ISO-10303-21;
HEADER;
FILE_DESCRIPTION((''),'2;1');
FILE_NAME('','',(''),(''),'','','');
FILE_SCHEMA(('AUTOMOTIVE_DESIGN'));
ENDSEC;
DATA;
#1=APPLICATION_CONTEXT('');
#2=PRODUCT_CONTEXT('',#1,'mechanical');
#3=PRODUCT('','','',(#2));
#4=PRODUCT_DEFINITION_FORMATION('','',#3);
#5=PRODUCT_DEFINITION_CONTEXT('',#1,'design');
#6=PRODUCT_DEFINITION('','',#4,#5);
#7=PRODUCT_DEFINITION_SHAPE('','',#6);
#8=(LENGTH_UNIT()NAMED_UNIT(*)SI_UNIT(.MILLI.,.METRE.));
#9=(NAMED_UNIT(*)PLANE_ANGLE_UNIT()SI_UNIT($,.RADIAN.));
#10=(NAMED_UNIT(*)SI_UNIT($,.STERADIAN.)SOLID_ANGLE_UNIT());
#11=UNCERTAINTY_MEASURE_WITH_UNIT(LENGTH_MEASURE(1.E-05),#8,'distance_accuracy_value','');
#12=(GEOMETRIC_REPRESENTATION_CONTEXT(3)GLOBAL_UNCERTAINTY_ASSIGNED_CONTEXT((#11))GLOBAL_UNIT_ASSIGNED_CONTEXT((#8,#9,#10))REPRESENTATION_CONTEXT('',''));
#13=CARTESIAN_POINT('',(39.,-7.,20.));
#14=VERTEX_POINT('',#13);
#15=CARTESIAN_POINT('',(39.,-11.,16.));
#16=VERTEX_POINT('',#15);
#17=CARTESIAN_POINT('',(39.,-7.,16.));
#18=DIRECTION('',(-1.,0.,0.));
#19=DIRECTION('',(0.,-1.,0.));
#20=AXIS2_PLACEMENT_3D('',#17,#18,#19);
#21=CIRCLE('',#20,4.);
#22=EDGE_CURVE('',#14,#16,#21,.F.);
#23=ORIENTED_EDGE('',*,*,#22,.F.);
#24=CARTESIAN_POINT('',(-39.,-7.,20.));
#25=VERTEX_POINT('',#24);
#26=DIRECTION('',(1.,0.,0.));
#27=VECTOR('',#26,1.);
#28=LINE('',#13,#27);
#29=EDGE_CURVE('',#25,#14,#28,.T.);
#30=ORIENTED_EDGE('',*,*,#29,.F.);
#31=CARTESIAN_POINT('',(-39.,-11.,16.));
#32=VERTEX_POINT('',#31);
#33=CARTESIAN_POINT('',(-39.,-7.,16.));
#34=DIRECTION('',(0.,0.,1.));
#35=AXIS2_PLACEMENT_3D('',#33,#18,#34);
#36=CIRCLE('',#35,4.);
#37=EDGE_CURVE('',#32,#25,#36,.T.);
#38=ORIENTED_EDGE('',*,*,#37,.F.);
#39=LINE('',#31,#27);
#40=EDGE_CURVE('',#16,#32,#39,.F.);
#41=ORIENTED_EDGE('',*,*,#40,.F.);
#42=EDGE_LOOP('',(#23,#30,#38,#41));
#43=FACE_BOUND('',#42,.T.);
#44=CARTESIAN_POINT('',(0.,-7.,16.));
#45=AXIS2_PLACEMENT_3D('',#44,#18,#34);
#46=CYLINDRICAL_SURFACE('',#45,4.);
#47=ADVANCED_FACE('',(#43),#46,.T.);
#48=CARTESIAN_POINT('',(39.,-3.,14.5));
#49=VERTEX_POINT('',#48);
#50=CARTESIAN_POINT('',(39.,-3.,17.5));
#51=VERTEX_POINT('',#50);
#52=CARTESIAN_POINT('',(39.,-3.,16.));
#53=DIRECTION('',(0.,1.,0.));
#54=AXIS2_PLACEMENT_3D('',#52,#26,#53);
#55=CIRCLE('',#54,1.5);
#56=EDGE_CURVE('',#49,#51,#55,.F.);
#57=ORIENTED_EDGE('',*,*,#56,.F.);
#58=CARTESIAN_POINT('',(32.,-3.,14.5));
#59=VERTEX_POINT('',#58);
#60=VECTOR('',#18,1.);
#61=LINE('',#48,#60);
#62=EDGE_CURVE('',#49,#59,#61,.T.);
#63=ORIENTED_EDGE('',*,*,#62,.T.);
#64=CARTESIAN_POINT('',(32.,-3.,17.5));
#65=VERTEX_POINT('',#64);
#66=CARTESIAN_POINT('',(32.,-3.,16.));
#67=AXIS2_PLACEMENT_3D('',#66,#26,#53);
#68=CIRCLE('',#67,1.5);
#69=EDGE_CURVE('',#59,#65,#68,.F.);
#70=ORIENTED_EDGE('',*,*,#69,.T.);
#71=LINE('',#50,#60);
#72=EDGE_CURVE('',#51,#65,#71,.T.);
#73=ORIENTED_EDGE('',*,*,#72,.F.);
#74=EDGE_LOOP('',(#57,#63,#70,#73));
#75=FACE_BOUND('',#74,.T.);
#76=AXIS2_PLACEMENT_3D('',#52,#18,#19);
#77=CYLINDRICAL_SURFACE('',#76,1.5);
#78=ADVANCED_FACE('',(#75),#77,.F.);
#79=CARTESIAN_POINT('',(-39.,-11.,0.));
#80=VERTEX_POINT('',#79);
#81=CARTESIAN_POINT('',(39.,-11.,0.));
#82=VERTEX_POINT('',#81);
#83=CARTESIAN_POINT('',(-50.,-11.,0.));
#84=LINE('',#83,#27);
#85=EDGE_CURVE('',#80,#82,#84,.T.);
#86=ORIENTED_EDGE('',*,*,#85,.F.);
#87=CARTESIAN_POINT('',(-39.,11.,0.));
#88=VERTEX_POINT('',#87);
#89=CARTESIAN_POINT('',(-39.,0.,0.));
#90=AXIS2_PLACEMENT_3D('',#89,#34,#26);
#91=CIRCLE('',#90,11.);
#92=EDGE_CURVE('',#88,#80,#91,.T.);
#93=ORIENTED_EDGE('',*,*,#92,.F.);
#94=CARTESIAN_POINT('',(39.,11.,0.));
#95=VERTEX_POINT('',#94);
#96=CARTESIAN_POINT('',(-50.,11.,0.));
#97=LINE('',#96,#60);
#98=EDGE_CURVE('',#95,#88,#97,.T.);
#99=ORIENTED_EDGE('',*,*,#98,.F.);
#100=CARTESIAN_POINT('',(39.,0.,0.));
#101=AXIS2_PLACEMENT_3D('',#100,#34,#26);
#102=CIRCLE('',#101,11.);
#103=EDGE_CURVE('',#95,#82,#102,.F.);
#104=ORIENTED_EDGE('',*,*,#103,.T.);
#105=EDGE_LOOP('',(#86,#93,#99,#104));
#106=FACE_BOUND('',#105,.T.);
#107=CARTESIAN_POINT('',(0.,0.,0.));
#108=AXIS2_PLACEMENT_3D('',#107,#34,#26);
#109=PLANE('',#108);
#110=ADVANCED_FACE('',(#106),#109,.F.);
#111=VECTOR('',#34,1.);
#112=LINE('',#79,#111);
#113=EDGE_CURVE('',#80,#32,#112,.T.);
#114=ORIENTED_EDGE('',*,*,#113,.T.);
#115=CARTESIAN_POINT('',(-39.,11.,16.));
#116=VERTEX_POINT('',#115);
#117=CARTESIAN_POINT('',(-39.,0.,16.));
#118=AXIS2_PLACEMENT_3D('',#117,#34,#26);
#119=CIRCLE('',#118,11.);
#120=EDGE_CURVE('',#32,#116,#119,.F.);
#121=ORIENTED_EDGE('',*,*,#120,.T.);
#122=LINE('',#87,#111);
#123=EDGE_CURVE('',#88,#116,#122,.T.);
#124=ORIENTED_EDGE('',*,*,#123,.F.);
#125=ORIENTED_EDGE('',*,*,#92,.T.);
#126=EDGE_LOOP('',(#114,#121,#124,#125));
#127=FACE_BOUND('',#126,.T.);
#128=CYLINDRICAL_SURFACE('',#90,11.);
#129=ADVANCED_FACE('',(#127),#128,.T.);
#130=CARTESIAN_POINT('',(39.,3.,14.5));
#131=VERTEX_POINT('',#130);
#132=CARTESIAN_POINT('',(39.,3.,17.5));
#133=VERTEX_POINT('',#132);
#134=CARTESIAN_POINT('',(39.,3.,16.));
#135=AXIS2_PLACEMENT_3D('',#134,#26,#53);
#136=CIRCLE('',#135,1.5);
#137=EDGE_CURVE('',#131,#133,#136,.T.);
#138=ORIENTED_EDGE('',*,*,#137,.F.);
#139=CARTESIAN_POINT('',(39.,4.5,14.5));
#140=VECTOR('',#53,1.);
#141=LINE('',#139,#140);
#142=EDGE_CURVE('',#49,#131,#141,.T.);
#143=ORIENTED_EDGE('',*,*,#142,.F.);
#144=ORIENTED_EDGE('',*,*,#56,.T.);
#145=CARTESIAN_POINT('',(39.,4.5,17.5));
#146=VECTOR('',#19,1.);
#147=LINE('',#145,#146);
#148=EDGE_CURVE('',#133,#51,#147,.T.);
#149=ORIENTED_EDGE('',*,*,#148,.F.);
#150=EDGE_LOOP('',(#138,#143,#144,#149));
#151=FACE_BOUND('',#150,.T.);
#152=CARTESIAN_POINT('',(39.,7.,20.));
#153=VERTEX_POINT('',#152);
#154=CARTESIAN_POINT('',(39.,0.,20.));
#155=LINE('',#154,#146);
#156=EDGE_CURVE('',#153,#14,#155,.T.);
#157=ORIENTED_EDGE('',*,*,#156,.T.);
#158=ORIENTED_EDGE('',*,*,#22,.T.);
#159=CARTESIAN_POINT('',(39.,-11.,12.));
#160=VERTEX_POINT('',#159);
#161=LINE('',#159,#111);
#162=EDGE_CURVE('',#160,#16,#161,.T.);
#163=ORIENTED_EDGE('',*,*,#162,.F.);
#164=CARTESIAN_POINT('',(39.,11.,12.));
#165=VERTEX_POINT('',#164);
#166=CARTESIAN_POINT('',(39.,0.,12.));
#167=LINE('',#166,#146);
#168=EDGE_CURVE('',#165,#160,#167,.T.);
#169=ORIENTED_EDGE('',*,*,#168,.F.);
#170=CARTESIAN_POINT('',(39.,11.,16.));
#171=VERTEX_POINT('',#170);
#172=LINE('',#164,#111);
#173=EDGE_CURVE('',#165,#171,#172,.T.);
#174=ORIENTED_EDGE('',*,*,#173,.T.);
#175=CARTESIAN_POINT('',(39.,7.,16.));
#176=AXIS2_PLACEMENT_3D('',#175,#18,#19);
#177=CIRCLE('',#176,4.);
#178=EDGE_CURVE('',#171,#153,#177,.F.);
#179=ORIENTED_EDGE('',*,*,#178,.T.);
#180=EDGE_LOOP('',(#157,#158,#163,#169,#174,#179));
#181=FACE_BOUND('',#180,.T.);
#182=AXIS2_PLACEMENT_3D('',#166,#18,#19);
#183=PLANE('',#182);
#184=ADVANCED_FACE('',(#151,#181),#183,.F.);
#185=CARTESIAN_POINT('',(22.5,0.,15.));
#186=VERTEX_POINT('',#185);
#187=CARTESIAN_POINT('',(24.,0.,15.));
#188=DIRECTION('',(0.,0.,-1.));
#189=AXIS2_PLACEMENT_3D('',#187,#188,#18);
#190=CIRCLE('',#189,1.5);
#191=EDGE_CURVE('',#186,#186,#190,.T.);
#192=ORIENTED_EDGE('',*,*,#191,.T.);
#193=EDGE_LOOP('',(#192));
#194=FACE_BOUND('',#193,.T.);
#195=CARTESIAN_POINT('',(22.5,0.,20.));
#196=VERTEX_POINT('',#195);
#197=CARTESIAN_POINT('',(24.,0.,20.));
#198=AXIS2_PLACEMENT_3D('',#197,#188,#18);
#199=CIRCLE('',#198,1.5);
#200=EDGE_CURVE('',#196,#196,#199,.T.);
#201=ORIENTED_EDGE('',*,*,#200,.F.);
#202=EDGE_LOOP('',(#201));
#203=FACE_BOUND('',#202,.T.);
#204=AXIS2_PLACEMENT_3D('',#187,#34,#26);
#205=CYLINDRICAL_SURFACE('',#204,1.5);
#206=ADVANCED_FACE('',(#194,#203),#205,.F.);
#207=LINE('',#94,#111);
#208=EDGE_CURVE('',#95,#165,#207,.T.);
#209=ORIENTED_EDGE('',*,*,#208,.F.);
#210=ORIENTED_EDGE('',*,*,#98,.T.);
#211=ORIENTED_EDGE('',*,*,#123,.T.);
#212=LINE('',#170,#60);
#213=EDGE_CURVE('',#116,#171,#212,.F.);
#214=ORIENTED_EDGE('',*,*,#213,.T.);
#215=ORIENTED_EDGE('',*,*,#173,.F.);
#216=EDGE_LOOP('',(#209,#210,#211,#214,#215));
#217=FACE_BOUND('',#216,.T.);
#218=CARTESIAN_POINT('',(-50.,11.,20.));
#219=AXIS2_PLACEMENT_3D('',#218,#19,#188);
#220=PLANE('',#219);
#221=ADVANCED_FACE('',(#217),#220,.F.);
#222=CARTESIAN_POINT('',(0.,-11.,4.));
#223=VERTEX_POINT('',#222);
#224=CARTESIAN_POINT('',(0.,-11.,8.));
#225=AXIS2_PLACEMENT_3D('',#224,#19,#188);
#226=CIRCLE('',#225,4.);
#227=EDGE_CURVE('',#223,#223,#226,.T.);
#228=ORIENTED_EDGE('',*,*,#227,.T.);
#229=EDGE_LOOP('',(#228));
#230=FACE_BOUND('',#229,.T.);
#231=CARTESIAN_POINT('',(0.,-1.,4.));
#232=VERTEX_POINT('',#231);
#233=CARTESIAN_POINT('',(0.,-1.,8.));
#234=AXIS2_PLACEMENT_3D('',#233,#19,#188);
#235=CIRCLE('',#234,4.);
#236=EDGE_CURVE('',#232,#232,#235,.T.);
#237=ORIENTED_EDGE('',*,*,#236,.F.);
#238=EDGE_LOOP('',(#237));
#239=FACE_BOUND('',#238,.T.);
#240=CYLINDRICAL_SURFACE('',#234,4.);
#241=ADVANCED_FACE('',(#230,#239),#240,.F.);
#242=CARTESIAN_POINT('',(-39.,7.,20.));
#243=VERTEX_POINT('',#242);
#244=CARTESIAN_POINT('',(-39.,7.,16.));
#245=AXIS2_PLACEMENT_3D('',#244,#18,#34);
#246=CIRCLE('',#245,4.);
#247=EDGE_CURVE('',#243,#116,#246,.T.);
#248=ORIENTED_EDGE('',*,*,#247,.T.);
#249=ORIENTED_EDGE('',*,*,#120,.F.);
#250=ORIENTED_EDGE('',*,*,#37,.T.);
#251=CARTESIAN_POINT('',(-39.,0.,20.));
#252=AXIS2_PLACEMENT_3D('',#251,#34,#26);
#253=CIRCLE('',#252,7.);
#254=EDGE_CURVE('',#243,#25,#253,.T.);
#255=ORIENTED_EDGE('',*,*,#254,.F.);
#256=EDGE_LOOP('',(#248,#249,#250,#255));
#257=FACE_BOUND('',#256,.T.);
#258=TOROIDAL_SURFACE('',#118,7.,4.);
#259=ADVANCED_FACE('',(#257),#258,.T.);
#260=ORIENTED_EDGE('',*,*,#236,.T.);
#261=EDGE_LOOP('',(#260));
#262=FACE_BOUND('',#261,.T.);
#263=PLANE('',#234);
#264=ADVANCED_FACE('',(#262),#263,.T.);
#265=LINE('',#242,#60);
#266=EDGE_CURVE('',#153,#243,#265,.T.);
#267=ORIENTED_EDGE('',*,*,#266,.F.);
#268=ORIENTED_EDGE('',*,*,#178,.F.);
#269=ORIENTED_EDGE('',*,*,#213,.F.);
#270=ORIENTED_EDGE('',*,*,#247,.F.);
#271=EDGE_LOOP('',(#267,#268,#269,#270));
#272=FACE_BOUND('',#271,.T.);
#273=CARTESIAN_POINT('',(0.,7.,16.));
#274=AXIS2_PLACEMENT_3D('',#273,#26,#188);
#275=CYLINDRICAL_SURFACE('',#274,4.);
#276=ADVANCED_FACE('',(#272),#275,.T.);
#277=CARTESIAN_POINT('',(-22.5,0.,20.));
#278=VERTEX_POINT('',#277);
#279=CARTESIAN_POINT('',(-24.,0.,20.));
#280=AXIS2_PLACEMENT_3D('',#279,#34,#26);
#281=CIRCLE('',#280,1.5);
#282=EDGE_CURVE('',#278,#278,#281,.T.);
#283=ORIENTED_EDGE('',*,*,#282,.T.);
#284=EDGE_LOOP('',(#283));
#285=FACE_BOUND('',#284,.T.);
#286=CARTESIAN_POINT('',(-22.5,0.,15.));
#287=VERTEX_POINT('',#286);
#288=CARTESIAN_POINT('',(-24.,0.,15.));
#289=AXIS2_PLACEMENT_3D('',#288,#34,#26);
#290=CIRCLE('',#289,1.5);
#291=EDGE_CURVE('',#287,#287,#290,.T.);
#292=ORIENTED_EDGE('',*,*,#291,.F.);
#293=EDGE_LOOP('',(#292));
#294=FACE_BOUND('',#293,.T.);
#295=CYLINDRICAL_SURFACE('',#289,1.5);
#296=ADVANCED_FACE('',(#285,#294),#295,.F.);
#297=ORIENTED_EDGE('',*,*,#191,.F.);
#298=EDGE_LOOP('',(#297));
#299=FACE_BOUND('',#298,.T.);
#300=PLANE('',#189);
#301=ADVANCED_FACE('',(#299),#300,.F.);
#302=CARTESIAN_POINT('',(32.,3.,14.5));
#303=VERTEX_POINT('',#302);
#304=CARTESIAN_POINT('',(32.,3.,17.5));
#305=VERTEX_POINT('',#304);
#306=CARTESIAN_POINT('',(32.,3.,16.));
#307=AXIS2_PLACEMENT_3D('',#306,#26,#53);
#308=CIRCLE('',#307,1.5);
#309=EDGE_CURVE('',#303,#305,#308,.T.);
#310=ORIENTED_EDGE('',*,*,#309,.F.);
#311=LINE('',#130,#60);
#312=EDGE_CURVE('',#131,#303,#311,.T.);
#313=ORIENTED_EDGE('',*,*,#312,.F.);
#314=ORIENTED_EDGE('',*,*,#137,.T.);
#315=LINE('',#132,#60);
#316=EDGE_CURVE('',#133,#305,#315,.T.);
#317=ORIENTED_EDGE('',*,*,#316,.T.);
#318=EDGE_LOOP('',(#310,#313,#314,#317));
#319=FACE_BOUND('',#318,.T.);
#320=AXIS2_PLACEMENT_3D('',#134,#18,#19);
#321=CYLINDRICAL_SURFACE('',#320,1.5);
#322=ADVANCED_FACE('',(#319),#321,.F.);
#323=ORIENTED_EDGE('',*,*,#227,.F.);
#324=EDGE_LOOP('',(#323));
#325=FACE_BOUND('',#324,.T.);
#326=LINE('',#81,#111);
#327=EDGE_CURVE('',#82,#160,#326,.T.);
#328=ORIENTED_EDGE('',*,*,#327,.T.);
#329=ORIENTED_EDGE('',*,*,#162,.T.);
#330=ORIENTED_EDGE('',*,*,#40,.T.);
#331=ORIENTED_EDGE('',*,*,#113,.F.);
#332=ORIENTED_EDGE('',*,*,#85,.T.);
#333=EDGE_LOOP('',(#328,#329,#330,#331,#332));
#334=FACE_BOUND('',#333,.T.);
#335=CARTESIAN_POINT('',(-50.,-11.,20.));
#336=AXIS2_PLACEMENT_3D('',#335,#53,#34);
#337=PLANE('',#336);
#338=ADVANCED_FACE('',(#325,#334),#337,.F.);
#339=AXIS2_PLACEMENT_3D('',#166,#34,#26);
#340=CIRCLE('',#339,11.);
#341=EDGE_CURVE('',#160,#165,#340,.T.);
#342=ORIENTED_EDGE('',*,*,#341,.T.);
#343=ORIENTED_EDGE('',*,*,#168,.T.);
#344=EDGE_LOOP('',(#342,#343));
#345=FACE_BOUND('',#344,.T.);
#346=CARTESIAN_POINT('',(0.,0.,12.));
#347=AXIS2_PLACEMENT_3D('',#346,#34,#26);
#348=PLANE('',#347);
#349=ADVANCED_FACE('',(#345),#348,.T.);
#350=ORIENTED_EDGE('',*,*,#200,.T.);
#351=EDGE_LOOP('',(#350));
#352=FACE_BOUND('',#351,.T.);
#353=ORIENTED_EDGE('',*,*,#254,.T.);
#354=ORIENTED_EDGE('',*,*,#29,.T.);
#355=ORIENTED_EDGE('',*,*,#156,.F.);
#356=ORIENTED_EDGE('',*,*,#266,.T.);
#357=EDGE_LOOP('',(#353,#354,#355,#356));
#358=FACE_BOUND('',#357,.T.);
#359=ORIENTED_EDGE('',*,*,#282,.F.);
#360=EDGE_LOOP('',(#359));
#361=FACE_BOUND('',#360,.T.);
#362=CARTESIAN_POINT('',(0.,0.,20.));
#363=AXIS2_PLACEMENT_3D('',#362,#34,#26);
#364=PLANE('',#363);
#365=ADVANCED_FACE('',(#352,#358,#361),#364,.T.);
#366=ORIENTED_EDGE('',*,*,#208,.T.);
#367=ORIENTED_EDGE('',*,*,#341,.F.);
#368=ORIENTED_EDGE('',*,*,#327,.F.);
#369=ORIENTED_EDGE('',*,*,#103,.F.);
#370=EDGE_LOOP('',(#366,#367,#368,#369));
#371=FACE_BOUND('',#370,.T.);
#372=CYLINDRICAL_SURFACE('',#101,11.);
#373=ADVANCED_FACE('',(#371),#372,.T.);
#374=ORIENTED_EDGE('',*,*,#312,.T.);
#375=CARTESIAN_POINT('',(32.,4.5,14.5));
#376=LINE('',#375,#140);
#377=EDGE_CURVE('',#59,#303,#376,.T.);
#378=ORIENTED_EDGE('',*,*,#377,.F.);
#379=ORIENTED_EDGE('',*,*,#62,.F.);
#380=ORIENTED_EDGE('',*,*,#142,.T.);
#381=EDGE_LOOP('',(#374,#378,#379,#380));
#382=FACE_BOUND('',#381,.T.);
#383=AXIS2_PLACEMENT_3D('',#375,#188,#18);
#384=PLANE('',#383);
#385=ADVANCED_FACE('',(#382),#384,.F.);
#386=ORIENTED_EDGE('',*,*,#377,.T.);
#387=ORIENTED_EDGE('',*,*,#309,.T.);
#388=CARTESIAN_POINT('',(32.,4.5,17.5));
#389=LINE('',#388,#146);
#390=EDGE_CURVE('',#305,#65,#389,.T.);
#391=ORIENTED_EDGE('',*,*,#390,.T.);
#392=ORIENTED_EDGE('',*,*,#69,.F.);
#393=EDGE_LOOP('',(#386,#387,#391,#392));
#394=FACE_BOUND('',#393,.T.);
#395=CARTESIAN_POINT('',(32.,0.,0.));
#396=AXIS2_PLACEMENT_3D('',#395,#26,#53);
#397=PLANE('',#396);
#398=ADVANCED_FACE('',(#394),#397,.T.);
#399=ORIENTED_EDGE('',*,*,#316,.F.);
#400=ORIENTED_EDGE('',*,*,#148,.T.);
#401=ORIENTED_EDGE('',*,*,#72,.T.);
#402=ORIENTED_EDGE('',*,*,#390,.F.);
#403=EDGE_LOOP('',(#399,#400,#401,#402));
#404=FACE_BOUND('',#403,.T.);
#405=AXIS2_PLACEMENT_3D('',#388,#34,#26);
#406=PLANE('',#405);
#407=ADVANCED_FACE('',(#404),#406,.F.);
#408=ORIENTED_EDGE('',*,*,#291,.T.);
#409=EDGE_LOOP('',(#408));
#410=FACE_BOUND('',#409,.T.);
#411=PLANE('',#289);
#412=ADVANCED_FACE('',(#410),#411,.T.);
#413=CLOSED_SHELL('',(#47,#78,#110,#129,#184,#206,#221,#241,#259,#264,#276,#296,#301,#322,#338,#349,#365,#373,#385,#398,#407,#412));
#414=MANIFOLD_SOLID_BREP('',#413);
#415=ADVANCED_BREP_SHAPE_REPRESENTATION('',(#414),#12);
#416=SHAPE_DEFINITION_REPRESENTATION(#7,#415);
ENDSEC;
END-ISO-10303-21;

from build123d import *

# Parameters (mm, degrees)
SKETCH_1_W          = 100.00000000000001
SKETCH_1_H          = 22
EXTRUDE_3_DEPTH     = 20
CUT_EXTRUDE_2_DEPTH = 20
CUT_EXTRUDE_3_DEPTH = 8
SKETCH_5_W          = 3.0000000000000018
SKETCH_5_H          = 9
CUT_EXTRUDE_5_DEPTH = 7
EXTRUDE_4_DEPTH     = 7
SKETCH_8_R          = 6
CUT_EXTRUDE_7_DEPTH = 10
FILLET_1_R          = 4
SKETCH_9_R          = 1.5000000000000007
CUT_EXTRUDE_8_DEPTH = 5
SKETCH_10_R         = 6.000000000004547
EXTRUDE_5_DEPTH     = 10
SKETCH_11_R         = 4
CUT_EXTRUDE_9_DEPTH = 10


with BuildPart() as part:
    # 草图1 → 凸台-拉伸3 (new body)
    with BuildSketch(Plane.XY):
        Rectangle(SKETCH_1_W, SKETCH_1_H)
    extrude(amount=EXTRUDE_3_DEPTH)

    # 草图3 → 切除-拉伸2 (cut)
    with BuildSketch(Plane.XY.offset(20)):
        with BuildLine():
            ThreePointArc((-50.00000000000001, 9.1e-16), (-46.77817459305203, 7.778174593052023), (-39.00000000000001, 11))
            Line((-39, 11), (-50, 11))
            Line((-50, 11), (-50, 1.78e-15))
        make_face()
        with BuildLine():
            Line((50, 11), (39.00000000000001, 11))
            ThreePointArc((39.00000000000001, 11), (46.77817459305203, 7.778174593052022), (50.00000000000001, -4.3e-16))
            Line((50, 0), (50, 11))
        make_face()
        with BuildLine():
            ThreePointArc((-39.00000000000001, -11), (-46.77817459305203, -7.778174593052022), (-50.00000000000001, 9.1e-16))
            Line((-50, 1.78e-15), (-50, -11))
            Line((-50, -11), (-39.00000000000001, -11))
        make_face()
        with BuildLine():
            Line((50, -11), (50, 0))
            ThreePointArc((50.00000000000001, -3.13e-15), (46.77817459305203, -7.778174593052024), (39.00000000000001, -11))
            Line((39, -11), (50, -11))
        make_face()
    extrude(amount=-CUT_EXTRUDE_2_DEPTH, mode=Mode.SUBTRACT)

    # 草图4 → 切除-拉伸3 (cut)
    with BuildSketch(Plane.XY.offset(20)):
        with BuildLine():
            ThreePointArc((50.000000000000014, 0), (46.77817459305202, 7.778174593052019), (38.999999999999986, 10.999999999999963))
            Line((38.999999999999964, 11), (39.00000000000013, -11))
            ThreePointArc((39.000000000000064, -10.999999999999963), (46.77817459305205, -7.7781745930519905), (50.000000000000014, -2.69e-15))
        make_face()
    extrude(amount=-CUT_EXTRUDE_3_DEPTH, mode=Mode.SUBTRACT)

    # 草图5 → 切除-拉伸5 (cut)
    with BuildSketch(Plane(origin=(39.00000000000005, 2.8292e-13, 0), x_dir=(0, 0, -1), z_dir=(1, 7.25e-15, 0))):
        with Locations((-16, 0)):
            Rectangle(SKETCH_5_W, SKETCH_5_H)
    extrude(amount=-CUT_EXTRUDE_5_DEPTH, mode=Mode.SUBTRACT)

    # 草图7 → 凸台-拉伸4 (add)
    with BuildSketch(Plane(origin=(32.00000000000005, 2.4672e-13, 0), x_dir=(0, 0, -1), z_dir=(1, 7.71e-15, 0))):
        with BuildLine():
            ThreePointArc((-17.5, 2.9999999999999836), (-17.060660171779823, 4.060660171779805), (-16, 4.499999999999984))
            Line((-16, 4.499999999999984), (-17.5, 4.499999999999985))
            Line((-17.5, 4.499999999999985), (-17.5, 2.9999999999999836))
        make_face()
        with BuildLine():
            Line((-14.499999999999998, 4.499999999999985), (-16, 4.499999999999984))
            ThreePointArc((-16, 4.499999999999984), (-14.939339828220177, 4.060660171779805), (-14.5, 2.9999999999999836))
            Line((-14.499999999999998, 2.9999999999999836), (-14.499999999999998, 4.499999999999985))
        make_face()
        with BuildLine():
            Line((-14.499999999999998, -4.500000000000014), (-14.499999999999998, -3.00000000000002))
            ThreePointArc((-14.5, -3.0000000000000204), (-14.939339828220177, -4.0606601717798405), (-15.999999999999998, -4.50000000000002))
            Line((-15.999999999999998, -4.500000000000016), (-14.499999999999998, -4.500000000000014))
        make_face()
        with BuildLine():
            ThreePointArc((-15.999999999999998, -4.50000000000002), (-17.060660171779823, -4.060660171779842), (-17.5, -3.00000000000002))
            Line((-17.5, -3.00000000000002), (-17.5, -4.500000000000018))
            Line((-17.5, -4.500000000000018), (-15.999999999999998, -4.500000000000016))
        make_face()
    extrude(amount=EXTRUDE_4_DEPTH)

    # 草图8 → 切除-拉伸7 (cut)
    with BuildSketch(Plane.XZ.offset(11)):
        with Locations((0, 9.999999999995454)):
            Circle(SKETCH_8_R)
    extrude(amount=-CUT_EXTRUDE_7_DEPTH, mode=Mode.SUBTRACT)

    # 圆角1
    fillet_1_edges = [part.edges().sort_by_distance(p)[0] for p in [
        (-50.00000000000001, -6.6e-16, 20),
        (0, -11, 20),
        (0, 11, 20),
    ]]
    fillet(fillet_1_edges, radius=FILLET_1_R)

    # 草图9 → 切除-拉伸8 (cut)
    with BuildSketch(Plane.XY.offset(20)):
        with Locations((-24.000000000000007, 0)):
            Circle(SKETCH_9_R)
        with Locations((24.000000000000007, 0)):
            Circle(SKETCH_9_R)
    extrude(amount=-CUT_EXTRUDE_8_DEPTH, mode=Mode.SUBTRACT)

    # 草图10 → 凸台-拉伸5 (add)
    with BuildSketch(Plane.XZ.offset(11)):
        with Locations((0, 9.999999999995454)):
            Circle(SKETCH_10_R)
    extrude(amount=-EXTRUDE_5_DEPTH)

    # 草图11 → 切除-拉伸9 (cut)
    with BuildSketch(Plane.XZ.offset(11)):
        with Locations((0, 8.000000000004889)):
            Circle(SKETCH_11_R)
    extrude(amount=-CUT_EXTRUDE_9_DEPTH, mode=Mode.SUBTRACT)


solid = part.part
